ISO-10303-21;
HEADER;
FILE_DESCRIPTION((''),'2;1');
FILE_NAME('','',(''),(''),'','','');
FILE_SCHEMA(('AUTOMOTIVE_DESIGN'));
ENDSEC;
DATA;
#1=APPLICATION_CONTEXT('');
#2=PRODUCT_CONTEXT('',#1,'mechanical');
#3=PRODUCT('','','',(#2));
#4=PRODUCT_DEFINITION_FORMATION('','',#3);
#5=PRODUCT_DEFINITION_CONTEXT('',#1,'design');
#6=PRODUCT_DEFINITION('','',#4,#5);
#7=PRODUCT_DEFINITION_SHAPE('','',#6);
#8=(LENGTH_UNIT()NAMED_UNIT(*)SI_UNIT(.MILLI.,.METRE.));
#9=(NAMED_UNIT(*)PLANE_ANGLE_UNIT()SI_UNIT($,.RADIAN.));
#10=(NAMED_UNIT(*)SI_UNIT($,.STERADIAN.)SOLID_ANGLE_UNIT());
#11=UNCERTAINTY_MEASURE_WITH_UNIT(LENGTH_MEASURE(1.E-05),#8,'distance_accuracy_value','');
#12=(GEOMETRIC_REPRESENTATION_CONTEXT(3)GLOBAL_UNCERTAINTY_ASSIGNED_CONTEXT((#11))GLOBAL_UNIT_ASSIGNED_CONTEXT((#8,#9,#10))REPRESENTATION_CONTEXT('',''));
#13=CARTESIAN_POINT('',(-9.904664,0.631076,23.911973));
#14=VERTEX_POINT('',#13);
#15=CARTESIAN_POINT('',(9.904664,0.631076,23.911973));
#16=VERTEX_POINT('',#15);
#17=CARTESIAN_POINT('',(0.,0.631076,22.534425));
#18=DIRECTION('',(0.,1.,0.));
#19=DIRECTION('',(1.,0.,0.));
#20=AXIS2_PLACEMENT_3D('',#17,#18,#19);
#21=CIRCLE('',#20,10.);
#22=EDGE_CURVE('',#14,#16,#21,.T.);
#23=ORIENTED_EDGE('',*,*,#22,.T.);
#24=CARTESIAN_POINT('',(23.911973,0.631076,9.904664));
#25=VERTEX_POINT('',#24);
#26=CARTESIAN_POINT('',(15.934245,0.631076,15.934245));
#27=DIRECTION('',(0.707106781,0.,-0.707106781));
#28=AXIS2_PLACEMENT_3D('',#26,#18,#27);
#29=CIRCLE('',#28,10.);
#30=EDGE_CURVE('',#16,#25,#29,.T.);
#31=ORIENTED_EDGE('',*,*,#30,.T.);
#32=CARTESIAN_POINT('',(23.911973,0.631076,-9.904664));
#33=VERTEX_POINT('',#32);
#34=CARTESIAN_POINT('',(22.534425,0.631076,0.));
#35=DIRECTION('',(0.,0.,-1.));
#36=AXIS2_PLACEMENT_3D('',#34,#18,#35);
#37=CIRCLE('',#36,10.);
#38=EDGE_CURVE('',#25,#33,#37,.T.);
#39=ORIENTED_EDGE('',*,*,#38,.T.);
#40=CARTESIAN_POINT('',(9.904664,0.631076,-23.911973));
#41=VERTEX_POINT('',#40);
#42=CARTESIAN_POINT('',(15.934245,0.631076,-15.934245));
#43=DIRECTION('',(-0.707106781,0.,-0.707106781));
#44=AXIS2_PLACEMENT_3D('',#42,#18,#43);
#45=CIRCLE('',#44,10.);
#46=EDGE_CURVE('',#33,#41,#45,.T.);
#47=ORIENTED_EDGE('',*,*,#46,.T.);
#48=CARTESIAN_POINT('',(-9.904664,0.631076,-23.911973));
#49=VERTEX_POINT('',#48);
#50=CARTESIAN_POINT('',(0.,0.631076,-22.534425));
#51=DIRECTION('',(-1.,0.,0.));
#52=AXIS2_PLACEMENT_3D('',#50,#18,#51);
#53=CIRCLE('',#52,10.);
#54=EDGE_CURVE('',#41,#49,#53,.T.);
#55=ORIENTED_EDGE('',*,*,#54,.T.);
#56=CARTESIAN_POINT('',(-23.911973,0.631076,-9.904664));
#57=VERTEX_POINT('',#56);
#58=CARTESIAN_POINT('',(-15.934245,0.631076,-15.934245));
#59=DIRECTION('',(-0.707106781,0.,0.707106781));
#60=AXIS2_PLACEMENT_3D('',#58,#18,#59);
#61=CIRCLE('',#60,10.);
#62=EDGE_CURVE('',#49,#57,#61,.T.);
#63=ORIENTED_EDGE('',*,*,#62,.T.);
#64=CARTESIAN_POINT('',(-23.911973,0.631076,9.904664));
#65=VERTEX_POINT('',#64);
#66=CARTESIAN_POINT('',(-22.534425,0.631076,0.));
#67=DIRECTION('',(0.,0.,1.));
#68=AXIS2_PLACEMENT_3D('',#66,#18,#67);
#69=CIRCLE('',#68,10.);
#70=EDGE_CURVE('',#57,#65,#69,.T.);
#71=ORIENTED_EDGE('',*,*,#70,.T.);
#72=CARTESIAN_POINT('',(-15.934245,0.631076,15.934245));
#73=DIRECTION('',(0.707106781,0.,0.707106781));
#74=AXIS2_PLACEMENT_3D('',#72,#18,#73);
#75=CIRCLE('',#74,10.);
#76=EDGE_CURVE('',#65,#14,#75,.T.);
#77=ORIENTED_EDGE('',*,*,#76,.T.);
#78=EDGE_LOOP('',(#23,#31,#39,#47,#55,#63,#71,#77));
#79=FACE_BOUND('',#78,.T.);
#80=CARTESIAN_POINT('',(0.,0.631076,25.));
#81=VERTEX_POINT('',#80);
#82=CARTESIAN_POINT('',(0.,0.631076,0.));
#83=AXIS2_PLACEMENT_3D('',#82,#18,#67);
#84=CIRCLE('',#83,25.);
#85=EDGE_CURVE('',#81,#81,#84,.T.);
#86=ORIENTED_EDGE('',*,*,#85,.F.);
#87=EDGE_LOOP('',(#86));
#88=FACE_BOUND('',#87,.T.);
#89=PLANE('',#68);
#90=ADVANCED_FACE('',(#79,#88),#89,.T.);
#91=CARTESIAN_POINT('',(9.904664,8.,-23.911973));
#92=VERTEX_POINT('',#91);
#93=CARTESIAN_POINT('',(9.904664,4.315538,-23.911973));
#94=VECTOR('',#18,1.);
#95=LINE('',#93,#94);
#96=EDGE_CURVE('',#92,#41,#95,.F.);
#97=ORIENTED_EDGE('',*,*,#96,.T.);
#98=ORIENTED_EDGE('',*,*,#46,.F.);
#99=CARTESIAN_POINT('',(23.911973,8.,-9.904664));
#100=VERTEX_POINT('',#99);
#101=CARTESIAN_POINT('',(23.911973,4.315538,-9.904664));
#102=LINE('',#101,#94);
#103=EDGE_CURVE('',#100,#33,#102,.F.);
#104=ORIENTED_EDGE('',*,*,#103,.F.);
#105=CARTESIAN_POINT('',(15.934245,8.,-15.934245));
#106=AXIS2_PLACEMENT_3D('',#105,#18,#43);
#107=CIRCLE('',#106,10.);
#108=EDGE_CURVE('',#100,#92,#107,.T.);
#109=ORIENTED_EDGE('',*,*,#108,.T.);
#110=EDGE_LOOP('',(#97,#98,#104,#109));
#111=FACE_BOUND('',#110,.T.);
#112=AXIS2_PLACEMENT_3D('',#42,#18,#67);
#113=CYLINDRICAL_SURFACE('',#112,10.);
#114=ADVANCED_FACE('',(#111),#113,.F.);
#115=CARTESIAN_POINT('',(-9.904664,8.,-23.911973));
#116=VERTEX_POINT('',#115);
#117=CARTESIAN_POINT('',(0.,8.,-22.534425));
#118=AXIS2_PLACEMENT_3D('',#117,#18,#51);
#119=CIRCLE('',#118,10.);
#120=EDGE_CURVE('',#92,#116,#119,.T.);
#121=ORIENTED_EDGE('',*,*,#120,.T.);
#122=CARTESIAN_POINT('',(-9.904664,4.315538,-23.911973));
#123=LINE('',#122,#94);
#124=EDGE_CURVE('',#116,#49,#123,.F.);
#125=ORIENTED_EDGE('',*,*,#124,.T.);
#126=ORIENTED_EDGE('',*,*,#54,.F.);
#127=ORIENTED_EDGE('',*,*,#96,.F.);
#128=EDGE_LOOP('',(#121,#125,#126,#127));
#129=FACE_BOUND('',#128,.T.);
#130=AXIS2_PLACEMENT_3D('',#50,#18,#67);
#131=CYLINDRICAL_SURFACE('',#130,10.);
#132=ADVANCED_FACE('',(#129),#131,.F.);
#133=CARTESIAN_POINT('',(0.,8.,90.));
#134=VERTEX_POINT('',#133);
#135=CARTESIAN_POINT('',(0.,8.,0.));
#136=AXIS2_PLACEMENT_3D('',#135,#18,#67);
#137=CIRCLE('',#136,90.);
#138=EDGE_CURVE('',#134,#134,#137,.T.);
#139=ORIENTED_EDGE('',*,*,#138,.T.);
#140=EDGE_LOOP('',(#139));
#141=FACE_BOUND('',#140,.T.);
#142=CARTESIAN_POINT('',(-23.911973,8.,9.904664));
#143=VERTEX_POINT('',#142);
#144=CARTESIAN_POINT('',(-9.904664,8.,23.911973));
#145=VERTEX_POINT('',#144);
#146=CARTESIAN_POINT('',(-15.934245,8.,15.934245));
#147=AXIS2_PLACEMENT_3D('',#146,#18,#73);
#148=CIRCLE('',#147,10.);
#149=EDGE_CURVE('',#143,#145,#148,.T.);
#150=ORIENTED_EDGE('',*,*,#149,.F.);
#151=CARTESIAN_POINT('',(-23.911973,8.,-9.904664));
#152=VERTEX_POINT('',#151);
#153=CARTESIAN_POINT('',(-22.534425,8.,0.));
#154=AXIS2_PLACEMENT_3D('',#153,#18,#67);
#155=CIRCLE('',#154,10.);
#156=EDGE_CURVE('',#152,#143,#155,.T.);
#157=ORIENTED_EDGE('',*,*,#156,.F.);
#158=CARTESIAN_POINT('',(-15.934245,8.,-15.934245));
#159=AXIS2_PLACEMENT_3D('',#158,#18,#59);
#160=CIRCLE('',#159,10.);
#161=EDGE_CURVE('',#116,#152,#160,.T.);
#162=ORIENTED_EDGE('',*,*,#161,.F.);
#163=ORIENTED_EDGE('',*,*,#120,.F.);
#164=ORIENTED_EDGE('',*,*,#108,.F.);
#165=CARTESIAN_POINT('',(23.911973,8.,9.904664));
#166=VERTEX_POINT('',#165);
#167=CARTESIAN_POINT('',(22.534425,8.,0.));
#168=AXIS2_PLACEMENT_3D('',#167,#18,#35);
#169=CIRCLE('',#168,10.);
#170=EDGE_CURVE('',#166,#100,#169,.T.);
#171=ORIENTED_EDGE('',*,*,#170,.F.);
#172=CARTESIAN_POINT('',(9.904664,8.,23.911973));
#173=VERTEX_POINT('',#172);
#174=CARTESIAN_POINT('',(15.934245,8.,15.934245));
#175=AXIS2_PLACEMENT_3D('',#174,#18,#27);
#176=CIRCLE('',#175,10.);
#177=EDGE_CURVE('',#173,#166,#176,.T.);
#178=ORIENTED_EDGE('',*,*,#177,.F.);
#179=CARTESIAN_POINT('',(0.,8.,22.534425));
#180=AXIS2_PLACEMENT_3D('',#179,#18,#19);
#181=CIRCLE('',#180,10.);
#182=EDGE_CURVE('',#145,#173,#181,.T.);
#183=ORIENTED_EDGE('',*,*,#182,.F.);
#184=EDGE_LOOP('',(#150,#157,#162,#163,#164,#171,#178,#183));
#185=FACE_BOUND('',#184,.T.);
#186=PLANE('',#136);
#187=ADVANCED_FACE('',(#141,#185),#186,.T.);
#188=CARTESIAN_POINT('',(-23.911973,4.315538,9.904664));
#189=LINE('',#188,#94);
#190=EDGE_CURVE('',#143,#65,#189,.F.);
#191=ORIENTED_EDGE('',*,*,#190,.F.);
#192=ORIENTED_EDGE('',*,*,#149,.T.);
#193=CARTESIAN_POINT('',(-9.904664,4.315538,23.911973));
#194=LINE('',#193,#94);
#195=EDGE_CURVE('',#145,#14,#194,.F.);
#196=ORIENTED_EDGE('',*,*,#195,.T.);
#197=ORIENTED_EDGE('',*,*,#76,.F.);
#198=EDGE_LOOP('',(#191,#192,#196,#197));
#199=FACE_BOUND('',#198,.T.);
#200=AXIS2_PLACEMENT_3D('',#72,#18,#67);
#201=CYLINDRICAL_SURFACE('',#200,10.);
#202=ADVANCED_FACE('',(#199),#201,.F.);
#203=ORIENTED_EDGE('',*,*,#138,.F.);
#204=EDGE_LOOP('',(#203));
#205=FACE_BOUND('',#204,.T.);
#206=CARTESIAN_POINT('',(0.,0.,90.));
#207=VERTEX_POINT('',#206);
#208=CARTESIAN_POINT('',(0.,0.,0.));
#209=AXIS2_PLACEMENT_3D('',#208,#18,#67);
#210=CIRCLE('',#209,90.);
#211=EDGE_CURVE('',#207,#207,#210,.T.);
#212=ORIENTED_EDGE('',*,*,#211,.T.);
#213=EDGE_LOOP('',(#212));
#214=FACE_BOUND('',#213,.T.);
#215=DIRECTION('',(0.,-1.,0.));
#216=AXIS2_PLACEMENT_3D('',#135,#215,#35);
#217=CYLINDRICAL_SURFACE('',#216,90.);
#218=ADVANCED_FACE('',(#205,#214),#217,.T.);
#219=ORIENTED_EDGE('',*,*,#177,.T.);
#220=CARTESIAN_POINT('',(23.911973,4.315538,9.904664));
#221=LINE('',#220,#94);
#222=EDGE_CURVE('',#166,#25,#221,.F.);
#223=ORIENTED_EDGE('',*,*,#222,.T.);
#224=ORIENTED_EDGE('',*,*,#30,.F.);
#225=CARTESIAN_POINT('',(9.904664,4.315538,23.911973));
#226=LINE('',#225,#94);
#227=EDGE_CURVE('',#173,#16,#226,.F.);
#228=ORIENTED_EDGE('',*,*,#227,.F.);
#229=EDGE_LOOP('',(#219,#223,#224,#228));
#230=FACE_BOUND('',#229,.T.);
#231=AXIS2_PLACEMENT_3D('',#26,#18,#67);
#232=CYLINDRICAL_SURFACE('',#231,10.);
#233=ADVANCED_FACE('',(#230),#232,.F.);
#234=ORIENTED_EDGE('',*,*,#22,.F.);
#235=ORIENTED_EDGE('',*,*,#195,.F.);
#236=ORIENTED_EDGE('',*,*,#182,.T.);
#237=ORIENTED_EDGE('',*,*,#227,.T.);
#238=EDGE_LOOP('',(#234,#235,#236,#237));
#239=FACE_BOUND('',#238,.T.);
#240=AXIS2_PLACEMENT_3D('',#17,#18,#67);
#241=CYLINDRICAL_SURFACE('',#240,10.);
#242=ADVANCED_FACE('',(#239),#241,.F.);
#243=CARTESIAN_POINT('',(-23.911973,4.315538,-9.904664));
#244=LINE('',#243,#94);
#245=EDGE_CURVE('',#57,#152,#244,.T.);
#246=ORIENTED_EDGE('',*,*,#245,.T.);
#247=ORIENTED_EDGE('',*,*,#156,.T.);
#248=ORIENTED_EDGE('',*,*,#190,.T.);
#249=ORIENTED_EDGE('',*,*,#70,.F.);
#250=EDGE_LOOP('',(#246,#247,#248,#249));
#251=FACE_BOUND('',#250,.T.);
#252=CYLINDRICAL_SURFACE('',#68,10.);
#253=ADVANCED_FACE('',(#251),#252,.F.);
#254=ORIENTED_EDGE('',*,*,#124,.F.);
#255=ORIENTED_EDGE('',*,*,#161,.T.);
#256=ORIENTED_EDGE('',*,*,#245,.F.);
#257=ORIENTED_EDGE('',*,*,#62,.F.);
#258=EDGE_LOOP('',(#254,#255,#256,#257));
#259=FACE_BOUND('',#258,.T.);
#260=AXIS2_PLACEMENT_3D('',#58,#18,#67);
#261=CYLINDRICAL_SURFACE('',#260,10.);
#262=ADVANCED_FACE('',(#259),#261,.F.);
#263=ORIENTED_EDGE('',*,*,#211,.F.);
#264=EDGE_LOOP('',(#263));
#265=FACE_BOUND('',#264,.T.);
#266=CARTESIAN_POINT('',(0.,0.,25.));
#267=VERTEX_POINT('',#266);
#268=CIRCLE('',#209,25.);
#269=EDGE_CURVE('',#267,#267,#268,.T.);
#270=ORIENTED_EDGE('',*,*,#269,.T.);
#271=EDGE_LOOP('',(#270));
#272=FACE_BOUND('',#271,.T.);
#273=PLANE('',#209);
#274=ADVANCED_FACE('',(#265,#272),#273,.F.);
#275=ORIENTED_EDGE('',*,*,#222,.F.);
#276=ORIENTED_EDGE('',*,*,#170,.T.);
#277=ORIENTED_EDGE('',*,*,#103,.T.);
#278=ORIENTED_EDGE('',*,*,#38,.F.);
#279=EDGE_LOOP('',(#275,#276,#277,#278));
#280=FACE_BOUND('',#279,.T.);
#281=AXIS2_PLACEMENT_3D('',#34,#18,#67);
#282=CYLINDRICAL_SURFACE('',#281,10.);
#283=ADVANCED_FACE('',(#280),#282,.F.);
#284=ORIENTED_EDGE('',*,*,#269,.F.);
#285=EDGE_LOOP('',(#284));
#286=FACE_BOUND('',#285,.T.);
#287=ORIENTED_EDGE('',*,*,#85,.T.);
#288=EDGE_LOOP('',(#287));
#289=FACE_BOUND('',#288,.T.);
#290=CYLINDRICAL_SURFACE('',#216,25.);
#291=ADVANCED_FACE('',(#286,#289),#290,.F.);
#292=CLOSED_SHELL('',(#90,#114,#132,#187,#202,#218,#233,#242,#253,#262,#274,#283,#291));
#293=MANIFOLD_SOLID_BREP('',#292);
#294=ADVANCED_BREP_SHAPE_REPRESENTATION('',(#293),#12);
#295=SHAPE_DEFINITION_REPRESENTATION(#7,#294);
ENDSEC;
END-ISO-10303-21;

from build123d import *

# Parameters (mm, degrees)
SKETCH1_R           = 90
BOSS_EXTRUDE1_DEPTH = 8
SKETCH2_R           = 25
CUT_EXTRUDE1_DEPTH  = 128.530388535
SKETCH3_R           = 10
CUT_EXTRUDE2_DEPTH  = 7.368924417
CIRPATTERN1_COUNT   = 8


with BuildPart() as part:
    # Sketch1 → Boss-Extrude1 (new body)
    with BuildSketch(Plane(origin=(0, 0, 0), x_dir=(1, 0, 0), z_dir=(0, 1, 0))):
        Circle(SKETCH1_R)
    extrude(amount=BOSS_EXTRUDE1_DEPTH)

    # Sketch2 → Cut-Extrude1 (cut, through all)
    with BuildSketch(Plane(origin=(0, 0, 0), x_dir=(1, 0, 0), z_dir=(0, 1, 0))):
        Circle(SKETCH2_R)
    extrude(amount=CUT_EXTRUDE1_DEPTH, mode=Mode.SUBTRACT)

    # Sketch3 → Cut-Extrude2 (cut)
    with BuildSketch(Plane(origin=(0, 8, 0), x_dir=(1, 0, 0), z_dir=(0, 1, 0))):
        with Locations((-22.534424719, 0)):
            Circle(SKETCH3_R)
    cut_extrude2 = extrude(amount=-CUT_EXTRUDE2_DEPTH, mode=Mode.SUBTRACT)

    # CirPattern1: Cut-Extrude2 ×8 about axis
    cirpattern1_axis = Axis((0, 0, 0), (0, 1, 0))
    for i in range(1, CIRPATTERN1_COUNT):
        add(cut_extrude2.rotate(cirpattern1_axis, i * 360 / CIRPATTERN1_COUNT), mode=Mode.SUBTRACT)


solid = part.part
